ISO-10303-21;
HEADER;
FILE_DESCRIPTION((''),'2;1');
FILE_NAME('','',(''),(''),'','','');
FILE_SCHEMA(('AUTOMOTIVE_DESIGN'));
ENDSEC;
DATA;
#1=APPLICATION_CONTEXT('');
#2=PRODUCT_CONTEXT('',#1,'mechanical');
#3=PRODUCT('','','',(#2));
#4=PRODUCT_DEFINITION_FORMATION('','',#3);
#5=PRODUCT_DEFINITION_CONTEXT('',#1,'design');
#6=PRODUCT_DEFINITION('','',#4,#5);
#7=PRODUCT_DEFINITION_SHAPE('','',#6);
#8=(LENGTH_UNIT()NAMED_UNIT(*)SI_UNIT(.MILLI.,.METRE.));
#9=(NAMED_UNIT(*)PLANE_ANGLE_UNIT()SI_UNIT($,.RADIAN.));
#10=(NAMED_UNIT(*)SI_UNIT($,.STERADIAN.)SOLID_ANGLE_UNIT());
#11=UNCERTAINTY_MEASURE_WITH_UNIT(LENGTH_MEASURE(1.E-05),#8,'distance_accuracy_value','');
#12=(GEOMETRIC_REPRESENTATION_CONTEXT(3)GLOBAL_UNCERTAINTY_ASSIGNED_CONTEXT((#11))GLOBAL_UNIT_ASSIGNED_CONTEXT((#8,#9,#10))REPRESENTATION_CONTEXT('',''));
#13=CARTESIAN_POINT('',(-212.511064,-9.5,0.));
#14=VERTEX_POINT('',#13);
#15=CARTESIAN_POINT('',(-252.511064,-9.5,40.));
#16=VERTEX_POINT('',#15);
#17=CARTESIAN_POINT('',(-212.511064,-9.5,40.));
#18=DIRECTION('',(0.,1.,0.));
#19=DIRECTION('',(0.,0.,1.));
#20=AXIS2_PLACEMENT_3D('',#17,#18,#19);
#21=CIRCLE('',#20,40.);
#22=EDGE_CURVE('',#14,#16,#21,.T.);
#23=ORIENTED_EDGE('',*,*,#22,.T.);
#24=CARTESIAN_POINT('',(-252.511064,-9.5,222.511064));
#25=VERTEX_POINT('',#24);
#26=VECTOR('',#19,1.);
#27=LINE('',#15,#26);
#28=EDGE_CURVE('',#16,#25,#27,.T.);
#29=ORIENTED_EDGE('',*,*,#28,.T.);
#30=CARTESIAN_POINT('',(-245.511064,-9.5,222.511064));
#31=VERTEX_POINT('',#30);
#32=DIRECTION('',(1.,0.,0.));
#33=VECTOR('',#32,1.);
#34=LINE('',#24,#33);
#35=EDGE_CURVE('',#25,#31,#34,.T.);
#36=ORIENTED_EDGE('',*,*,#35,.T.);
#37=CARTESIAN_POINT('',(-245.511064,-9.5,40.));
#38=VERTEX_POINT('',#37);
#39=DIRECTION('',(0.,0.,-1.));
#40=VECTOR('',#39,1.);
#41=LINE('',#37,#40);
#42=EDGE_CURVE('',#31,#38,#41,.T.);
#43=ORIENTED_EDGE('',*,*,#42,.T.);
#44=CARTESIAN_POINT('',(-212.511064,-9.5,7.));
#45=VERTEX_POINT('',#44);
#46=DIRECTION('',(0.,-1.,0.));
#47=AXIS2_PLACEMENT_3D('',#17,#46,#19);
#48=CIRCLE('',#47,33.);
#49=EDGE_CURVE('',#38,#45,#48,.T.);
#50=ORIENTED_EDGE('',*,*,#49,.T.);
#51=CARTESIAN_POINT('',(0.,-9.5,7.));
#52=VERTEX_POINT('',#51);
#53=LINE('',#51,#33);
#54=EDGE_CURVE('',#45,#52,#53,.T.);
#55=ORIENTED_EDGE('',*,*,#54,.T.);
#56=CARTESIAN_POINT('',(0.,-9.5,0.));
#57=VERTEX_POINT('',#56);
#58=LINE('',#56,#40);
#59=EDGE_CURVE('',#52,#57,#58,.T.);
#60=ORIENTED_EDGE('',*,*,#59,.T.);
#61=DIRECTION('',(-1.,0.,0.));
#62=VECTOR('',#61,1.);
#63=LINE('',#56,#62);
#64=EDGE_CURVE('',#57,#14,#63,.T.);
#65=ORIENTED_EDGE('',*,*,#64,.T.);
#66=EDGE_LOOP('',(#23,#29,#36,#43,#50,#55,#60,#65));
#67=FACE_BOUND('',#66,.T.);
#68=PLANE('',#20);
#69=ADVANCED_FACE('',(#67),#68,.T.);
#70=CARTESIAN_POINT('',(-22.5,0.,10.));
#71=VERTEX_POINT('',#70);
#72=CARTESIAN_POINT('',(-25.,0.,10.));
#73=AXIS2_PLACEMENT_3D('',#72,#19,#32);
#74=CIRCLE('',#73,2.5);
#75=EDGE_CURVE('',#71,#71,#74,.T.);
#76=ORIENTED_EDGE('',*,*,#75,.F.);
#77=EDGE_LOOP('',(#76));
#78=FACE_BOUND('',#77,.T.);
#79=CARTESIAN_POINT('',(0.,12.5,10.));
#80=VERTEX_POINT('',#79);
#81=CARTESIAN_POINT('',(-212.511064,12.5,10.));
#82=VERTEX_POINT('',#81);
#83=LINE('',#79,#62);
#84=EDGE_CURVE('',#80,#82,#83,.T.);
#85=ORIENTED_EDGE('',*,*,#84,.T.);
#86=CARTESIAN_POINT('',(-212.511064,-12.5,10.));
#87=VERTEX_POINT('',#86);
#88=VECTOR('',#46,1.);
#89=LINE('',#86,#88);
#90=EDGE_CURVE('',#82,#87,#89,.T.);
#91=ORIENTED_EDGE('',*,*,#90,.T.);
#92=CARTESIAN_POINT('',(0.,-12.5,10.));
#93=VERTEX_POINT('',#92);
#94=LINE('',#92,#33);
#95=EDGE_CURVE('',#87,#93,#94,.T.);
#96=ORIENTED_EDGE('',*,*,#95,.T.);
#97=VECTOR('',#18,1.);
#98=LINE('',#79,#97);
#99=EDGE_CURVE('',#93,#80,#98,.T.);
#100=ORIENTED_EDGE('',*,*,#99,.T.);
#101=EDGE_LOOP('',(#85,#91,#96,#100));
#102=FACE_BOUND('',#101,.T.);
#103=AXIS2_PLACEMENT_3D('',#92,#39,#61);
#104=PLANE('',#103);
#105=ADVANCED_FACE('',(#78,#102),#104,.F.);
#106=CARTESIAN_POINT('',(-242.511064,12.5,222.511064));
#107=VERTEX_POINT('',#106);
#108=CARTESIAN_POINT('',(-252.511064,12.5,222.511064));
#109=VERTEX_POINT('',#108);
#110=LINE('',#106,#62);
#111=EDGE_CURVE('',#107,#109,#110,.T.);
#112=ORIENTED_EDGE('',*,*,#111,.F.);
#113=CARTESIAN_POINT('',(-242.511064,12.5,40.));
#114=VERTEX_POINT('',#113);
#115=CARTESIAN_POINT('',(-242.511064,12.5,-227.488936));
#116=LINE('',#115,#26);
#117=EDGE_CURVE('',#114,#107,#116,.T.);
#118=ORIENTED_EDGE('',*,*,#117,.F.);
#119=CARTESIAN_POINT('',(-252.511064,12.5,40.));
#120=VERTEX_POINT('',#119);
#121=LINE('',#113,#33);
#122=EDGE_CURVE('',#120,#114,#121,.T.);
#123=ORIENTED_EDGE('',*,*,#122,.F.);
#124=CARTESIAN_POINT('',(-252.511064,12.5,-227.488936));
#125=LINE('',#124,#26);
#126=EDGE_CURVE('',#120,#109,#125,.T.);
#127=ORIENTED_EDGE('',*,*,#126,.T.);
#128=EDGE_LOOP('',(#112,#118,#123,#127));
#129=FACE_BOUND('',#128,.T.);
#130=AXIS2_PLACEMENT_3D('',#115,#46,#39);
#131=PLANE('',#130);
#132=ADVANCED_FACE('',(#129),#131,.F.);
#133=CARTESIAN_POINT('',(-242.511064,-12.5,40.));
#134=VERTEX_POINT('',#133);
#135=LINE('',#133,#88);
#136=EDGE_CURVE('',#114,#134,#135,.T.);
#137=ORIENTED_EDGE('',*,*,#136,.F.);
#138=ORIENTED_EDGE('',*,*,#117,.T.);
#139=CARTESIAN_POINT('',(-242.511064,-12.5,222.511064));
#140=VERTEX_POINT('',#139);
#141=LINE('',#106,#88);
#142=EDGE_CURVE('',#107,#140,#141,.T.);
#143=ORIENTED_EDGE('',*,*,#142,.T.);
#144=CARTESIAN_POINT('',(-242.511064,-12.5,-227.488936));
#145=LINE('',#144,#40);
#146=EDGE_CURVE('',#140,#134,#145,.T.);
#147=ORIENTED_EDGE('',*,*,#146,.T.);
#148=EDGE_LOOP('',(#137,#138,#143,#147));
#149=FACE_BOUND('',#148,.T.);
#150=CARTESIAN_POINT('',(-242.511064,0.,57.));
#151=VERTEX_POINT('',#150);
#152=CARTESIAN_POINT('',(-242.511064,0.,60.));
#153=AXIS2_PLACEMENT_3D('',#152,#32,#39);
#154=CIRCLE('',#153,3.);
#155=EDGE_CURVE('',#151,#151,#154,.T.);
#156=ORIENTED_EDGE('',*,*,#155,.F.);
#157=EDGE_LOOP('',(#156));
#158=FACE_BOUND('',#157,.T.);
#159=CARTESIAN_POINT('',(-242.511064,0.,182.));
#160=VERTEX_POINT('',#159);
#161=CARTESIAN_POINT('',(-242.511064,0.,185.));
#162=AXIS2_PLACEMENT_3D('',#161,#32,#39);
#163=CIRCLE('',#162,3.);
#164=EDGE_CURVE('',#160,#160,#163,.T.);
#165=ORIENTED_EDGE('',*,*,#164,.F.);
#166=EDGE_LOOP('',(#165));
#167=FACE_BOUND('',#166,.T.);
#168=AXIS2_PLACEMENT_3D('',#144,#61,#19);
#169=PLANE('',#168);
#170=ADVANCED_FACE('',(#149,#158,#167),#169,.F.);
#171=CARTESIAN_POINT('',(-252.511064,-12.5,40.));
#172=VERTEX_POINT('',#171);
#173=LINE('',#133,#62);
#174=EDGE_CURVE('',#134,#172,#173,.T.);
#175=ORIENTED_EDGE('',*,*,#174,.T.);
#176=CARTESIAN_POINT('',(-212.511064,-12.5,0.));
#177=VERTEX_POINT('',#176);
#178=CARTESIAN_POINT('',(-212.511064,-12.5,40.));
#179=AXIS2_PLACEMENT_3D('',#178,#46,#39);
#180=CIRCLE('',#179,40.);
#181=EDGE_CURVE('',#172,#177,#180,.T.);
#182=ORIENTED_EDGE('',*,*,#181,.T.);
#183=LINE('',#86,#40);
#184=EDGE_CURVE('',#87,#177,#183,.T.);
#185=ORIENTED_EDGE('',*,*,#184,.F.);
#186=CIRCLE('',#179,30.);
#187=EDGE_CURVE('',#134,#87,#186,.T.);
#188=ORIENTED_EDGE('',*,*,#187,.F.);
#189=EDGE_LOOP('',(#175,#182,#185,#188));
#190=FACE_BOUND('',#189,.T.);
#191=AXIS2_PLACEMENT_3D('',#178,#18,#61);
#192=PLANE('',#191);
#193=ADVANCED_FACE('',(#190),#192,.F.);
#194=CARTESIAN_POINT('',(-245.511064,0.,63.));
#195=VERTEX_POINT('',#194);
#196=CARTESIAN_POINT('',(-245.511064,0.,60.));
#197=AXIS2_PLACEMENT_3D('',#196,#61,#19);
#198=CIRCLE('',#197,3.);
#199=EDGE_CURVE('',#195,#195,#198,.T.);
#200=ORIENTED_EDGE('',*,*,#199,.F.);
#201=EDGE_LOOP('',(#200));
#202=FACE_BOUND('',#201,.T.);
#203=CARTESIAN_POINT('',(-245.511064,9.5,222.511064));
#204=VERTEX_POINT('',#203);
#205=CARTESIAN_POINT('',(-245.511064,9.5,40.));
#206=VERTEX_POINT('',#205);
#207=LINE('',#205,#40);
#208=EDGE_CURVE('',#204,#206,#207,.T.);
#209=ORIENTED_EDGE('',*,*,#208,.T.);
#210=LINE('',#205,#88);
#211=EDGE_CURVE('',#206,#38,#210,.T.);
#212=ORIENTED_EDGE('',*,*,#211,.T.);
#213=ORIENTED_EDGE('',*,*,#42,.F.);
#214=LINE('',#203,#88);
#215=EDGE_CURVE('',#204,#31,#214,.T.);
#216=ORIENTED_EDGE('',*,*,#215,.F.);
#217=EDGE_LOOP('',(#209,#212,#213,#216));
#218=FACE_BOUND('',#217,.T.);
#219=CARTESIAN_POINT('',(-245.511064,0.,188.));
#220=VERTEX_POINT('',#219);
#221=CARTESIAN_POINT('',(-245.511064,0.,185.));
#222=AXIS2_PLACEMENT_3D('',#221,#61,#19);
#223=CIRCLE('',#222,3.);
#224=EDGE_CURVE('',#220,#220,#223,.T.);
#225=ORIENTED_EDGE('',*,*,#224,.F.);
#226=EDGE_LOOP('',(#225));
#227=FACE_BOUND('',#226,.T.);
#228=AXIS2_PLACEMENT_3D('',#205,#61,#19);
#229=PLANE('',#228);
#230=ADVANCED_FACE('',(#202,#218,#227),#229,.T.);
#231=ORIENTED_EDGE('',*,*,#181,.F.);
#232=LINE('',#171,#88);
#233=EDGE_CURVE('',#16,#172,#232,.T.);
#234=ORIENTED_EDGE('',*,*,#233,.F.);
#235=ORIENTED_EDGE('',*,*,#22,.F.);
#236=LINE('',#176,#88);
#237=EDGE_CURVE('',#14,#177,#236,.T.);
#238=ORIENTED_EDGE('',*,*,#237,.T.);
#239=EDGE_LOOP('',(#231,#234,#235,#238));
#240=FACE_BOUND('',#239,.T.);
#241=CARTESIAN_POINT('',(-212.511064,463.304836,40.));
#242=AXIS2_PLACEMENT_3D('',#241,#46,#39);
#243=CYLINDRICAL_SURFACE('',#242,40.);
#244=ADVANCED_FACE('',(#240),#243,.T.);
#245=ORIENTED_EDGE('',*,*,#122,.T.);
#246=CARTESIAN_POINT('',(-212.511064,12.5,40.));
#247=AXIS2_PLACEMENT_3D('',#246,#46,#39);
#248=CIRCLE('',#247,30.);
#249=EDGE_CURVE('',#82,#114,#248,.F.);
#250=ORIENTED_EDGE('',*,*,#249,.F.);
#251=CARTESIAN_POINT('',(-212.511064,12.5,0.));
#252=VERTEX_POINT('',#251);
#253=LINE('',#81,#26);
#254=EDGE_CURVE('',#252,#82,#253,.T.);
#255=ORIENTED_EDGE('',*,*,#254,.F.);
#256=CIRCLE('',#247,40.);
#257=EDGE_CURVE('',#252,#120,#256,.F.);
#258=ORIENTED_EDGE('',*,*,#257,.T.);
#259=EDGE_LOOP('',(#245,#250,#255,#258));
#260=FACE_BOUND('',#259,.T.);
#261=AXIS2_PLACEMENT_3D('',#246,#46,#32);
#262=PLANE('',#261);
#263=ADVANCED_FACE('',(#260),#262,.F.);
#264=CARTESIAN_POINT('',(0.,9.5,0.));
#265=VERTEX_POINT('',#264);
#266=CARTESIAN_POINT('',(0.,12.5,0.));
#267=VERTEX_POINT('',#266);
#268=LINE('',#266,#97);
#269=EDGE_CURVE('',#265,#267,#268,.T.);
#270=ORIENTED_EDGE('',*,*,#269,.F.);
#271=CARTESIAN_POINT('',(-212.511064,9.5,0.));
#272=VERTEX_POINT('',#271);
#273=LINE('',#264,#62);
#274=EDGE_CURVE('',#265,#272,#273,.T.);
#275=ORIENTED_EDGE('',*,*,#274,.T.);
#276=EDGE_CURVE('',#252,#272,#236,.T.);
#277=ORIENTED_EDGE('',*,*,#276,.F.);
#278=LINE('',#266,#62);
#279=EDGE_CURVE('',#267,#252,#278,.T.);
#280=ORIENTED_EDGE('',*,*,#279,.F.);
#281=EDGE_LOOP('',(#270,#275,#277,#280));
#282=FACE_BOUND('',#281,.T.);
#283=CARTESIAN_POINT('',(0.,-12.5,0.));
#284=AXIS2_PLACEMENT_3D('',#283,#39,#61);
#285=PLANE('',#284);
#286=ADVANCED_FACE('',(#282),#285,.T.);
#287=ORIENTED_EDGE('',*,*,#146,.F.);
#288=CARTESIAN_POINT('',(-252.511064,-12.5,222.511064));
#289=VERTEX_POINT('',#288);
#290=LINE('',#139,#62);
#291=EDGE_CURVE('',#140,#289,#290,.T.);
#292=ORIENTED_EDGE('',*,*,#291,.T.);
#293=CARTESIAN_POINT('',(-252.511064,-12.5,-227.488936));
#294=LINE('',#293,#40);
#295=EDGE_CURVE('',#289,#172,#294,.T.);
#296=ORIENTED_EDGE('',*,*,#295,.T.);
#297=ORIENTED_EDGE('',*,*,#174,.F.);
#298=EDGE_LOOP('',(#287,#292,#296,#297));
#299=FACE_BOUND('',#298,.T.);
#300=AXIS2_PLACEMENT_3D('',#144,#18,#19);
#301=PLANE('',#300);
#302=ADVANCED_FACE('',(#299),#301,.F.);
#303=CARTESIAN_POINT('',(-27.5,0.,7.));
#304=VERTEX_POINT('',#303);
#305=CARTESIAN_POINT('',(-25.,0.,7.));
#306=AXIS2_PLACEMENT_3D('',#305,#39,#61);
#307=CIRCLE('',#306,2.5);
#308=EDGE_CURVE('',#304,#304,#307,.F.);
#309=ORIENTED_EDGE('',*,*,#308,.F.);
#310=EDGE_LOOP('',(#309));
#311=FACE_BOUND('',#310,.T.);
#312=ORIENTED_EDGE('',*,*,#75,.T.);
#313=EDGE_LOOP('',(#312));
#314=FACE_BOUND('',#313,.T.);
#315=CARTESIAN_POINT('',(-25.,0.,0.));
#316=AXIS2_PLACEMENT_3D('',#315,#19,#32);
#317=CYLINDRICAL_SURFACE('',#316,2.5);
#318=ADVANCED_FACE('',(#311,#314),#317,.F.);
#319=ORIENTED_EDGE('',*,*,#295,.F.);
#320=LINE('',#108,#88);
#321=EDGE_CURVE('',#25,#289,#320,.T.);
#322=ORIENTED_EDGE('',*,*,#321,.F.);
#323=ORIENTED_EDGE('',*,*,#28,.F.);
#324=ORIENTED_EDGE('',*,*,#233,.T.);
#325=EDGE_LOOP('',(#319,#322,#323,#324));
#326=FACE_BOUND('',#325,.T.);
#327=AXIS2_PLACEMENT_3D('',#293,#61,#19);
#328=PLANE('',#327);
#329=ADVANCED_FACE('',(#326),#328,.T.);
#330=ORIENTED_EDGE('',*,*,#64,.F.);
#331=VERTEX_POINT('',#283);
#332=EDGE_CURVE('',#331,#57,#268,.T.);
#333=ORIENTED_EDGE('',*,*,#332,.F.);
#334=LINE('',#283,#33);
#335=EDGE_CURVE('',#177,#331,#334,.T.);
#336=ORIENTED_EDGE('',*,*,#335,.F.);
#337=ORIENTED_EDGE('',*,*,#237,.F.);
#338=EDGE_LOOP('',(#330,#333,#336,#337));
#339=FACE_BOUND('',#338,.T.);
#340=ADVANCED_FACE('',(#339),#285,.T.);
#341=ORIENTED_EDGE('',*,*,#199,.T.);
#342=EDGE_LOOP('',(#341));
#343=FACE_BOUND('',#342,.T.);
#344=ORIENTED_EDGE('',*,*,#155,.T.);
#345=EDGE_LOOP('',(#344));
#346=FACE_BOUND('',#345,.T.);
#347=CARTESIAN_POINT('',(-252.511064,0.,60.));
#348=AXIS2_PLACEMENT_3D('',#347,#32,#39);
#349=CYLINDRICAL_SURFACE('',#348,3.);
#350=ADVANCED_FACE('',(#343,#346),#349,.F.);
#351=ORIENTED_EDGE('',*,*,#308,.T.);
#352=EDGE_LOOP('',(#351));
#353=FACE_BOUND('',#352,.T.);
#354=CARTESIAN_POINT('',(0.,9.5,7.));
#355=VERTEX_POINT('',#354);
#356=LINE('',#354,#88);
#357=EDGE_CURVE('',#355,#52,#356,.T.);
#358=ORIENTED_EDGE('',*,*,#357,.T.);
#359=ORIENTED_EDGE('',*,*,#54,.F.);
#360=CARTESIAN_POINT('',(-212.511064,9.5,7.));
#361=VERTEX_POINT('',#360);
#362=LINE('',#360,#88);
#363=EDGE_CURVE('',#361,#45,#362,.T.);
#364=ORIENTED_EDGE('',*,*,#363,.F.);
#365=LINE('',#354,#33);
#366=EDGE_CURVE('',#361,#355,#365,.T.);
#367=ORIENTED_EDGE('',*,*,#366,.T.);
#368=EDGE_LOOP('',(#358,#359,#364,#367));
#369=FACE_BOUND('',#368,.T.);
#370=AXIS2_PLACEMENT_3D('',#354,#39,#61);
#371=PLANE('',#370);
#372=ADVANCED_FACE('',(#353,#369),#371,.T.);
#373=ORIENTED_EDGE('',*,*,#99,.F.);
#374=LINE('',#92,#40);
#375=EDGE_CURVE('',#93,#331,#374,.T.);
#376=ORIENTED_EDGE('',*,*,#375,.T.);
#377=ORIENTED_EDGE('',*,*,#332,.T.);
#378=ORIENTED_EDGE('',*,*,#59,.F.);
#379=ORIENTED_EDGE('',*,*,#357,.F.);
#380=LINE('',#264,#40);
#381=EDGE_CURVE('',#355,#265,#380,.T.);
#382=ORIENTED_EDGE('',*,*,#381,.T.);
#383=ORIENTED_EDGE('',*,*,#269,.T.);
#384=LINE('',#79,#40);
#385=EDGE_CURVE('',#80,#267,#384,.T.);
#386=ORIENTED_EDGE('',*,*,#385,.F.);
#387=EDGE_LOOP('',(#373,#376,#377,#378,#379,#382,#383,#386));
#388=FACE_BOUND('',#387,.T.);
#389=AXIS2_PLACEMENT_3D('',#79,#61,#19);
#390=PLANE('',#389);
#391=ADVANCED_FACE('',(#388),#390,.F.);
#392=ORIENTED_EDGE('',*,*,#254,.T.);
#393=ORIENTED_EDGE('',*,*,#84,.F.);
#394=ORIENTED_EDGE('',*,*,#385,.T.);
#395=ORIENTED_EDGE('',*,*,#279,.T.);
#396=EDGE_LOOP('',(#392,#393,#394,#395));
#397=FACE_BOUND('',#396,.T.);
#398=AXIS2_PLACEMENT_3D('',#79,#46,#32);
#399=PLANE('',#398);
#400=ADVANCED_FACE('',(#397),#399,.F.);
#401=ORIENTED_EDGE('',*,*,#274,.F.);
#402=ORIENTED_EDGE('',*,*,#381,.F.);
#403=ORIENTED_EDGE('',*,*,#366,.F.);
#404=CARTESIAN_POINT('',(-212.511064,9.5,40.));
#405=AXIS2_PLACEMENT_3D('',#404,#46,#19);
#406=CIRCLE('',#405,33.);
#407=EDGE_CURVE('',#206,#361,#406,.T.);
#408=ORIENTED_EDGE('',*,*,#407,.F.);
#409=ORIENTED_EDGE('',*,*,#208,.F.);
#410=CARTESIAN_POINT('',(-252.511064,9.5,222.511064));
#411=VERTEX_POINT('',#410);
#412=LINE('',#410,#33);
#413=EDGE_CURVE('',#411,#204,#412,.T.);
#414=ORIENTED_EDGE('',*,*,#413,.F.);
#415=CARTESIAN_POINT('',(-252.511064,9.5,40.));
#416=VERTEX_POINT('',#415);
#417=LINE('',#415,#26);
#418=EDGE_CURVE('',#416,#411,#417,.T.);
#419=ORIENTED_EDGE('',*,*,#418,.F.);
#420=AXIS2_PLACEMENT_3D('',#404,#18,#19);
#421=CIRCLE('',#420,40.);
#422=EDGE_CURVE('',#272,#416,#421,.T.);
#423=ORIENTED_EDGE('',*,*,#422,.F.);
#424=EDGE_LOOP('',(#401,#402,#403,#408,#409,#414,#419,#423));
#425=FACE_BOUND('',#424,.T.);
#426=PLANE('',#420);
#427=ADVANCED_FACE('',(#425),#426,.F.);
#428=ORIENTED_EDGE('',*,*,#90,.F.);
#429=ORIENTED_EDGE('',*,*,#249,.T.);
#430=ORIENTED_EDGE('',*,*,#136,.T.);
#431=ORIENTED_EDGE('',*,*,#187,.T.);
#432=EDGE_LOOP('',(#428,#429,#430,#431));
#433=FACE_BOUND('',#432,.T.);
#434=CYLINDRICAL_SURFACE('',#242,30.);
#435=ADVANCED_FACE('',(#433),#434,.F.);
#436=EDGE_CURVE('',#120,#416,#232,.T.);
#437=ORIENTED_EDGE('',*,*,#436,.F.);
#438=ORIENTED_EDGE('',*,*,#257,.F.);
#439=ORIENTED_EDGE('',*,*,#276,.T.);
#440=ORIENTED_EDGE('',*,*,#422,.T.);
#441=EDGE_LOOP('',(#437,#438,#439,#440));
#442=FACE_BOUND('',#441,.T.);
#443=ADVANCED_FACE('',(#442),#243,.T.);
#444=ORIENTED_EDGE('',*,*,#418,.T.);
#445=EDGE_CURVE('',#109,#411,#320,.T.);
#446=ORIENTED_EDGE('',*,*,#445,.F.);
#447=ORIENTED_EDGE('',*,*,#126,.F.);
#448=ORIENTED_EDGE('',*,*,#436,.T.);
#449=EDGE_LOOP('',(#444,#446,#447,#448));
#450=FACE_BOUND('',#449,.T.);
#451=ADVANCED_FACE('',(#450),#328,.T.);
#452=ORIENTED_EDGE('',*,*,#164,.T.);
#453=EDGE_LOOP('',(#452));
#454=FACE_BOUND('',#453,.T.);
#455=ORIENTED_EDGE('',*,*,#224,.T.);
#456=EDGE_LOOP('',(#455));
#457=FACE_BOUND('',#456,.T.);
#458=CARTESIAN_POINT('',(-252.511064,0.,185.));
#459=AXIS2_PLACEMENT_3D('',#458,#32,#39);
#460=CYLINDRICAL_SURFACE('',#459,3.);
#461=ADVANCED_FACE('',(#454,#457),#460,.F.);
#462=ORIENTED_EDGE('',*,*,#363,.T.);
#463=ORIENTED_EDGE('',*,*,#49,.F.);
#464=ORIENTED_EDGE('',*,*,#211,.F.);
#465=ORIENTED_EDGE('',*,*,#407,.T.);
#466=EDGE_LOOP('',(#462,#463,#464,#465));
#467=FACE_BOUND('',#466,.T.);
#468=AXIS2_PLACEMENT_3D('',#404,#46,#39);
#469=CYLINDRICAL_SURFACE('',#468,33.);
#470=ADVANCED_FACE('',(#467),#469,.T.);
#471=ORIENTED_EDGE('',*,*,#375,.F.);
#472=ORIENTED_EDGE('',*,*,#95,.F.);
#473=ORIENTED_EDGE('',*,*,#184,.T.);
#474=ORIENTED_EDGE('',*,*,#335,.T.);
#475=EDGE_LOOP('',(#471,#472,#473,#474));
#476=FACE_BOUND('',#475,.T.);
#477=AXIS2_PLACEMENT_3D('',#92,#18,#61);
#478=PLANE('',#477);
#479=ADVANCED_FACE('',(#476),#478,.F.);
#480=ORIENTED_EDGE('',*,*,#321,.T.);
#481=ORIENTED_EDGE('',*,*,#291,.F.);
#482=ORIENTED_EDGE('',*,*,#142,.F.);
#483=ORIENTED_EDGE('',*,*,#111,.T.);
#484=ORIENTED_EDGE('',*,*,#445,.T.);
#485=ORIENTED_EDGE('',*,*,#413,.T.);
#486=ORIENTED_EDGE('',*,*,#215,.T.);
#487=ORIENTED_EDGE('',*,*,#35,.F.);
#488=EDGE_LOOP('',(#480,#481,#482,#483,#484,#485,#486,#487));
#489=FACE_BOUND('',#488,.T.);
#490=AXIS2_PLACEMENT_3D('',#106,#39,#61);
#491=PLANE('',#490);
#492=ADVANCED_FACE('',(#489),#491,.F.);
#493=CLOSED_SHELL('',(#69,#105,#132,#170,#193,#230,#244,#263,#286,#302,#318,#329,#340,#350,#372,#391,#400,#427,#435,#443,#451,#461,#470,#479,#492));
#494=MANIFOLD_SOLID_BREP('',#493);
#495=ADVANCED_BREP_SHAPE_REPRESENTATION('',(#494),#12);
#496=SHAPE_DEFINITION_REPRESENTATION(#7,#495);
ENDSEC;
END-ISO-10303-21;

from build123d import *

# Parameters (mm, degrees)
ESQUISSE1_W                  = 450
ESQUISSE1_H                  = 25
EXTRUSION1_DEPTH             = 10
PLIAGE_START                 = -12.5
PLIAGE_1_DEPTH               = 25
PLIAGE_1_2_DEPTH             = 25
ESQUISSE5_R                  = 3
ENL_V_MAT_EXTRU_1_DEPTH      = 330.361564282
ESQUISSE7_R                  = 2.5
ENL_V_MAT_EXTRU_2_DEPTH      = 331.27116136
ENL_V_MAT_EXTRU_3_DEPTH      = 9.5
ENL_V_MAT_EXTRU_3_DEPTH_BACK = 9.5


# Read off the part's stored shape, not the designer's step: Pliage 1
with BuildPart() as part:
    # Esquisse1 → Extrusion1 (new body)
    with BuildSketch(Plane.XY):
        with Locations((-225, 0)):
            Rectangle(ESQUISSE1_W, ESQUISSE1_H)
    extrude(amount=EXTRUSION1_DEPTH)

    # Pliage 1 outline → Pliage 1 (cut)
    with BuildSketch(Plane(origin=(0, 0, 0), x_dir=(1, 0, 0), z_dir=(0, 1, 0)).offset(PLIAGE_START)):
        with BuildLine():
            Line((-450, -10), (-238.968577392, -10))
            ThreePointArc((-238.968577392, -10), (-226.653199905, -2.583426132), (-212.511064281, 0))
            Line((-212.511064281, 0), (-450, 0))
            Line((-450, 0), (-450, -10))
        make_face()
    extrude(amount=PLIAGE_1_DEPTH, mode=Mode.SUBTRACT)

    # Pliage 1 2 outline → Pliage 1 2 (add)
    with BuildSketch(Plane(origin=(0, 0, 0), x_dir=(1, 0, 0), z_dir=(0, 1, 0)).offset(PLIAGE_START)):
        with BuildLine():
            ThreePointArc((-238.968577392, -10), (-248.968577392, -23.542486889), (-252.511064281, -40))
            Line((-252.511064281, -40), (-252.511064281, -222.511064281))
            Line((-252.511064281, -222.511064281), (-242.511064281, -222.511064281))
            Line((-242.511064281, -222.511064281), (-242.511064281, -40))
            ThreePointArc((-242.511064281, -40), (-233.724267717, -18.786796564), (-212.511064281, -10))
            Line((-212.511064281, -10), (-238.968577392, -10))
        make_face()
    extrude(amount=PLIAGE_1_2_DEPTH)

    # Esquisse5 → Enlèv. mat.-Extru.1 (cut, through all)
    with BuildSketch(Plane(origin=(-242.511064281, 0, 0), x_dir=(0, 0, -1), z_dir=(1, 0, 0))):
        with Locations((-185, 0)):
            Circle(ESQUISSE5_R)
        with Locations((-60, 0)):
            Circle(ESQUISSE5_R)
    extrude(amount=-ENL_V_MAT_EXTRU_1_DEPTH, mode=Mode.SUBTRACT)

    # Esquisse7 → Enlèv. mat.-Extru.2 (cut, through all)
    with BuildSketch(Plane.XY.offset(10)):
        with Locations((-25, 0)):
            Circle(ESQUISSE7_R)
    extrude(amount=-ENL_V_MAT_EXTRU_2_DEPTH, mode=Mode.SUBTRACT)

    # Esquisse8 → Enlèv. mat.-Extru.3 (cut, two sides: drawn at the far end of the back side and taken through both)
    with BuildSketch(Plane(origin=(0, 0, 0), x_dir=(1, 0, 0), z_dir=(0, 1, 0)).offset(-ENL_V_MAT_EXTRU_3_DEPTH_BACK)):
        with BuildLine():
            Line((0, -7), (-212.511064281, -7))
            ThreePointArc((-212.511064281, -7), (-235.84558806, -16.665476221), (-245.511064281, -40))
            Line((-245.511064281, -40), (-245.511064281, -222.511064281))
            Line((-245.511064281, -222.511064281), (-252.511064281, -222.511064281))
            Line((-252.511064281, -222.511064281), (-252.511064281, -40))
            ThreePointArc((-252.511064281, -40), (-240.795335529, -11.715728753), (-212.511064281, 0))
            Line((-212.511064281, 0), (0, 0))
            Line((0, 0), (0, -7))
        make_face()
    extrude(amount=ENL_V_MAT_EXTRU_3_DEPTH + ENL_V_MAT_EXTRU_3_DEPTH_BACK, mode=Mode.SUBTRACT)


solid = part.part
